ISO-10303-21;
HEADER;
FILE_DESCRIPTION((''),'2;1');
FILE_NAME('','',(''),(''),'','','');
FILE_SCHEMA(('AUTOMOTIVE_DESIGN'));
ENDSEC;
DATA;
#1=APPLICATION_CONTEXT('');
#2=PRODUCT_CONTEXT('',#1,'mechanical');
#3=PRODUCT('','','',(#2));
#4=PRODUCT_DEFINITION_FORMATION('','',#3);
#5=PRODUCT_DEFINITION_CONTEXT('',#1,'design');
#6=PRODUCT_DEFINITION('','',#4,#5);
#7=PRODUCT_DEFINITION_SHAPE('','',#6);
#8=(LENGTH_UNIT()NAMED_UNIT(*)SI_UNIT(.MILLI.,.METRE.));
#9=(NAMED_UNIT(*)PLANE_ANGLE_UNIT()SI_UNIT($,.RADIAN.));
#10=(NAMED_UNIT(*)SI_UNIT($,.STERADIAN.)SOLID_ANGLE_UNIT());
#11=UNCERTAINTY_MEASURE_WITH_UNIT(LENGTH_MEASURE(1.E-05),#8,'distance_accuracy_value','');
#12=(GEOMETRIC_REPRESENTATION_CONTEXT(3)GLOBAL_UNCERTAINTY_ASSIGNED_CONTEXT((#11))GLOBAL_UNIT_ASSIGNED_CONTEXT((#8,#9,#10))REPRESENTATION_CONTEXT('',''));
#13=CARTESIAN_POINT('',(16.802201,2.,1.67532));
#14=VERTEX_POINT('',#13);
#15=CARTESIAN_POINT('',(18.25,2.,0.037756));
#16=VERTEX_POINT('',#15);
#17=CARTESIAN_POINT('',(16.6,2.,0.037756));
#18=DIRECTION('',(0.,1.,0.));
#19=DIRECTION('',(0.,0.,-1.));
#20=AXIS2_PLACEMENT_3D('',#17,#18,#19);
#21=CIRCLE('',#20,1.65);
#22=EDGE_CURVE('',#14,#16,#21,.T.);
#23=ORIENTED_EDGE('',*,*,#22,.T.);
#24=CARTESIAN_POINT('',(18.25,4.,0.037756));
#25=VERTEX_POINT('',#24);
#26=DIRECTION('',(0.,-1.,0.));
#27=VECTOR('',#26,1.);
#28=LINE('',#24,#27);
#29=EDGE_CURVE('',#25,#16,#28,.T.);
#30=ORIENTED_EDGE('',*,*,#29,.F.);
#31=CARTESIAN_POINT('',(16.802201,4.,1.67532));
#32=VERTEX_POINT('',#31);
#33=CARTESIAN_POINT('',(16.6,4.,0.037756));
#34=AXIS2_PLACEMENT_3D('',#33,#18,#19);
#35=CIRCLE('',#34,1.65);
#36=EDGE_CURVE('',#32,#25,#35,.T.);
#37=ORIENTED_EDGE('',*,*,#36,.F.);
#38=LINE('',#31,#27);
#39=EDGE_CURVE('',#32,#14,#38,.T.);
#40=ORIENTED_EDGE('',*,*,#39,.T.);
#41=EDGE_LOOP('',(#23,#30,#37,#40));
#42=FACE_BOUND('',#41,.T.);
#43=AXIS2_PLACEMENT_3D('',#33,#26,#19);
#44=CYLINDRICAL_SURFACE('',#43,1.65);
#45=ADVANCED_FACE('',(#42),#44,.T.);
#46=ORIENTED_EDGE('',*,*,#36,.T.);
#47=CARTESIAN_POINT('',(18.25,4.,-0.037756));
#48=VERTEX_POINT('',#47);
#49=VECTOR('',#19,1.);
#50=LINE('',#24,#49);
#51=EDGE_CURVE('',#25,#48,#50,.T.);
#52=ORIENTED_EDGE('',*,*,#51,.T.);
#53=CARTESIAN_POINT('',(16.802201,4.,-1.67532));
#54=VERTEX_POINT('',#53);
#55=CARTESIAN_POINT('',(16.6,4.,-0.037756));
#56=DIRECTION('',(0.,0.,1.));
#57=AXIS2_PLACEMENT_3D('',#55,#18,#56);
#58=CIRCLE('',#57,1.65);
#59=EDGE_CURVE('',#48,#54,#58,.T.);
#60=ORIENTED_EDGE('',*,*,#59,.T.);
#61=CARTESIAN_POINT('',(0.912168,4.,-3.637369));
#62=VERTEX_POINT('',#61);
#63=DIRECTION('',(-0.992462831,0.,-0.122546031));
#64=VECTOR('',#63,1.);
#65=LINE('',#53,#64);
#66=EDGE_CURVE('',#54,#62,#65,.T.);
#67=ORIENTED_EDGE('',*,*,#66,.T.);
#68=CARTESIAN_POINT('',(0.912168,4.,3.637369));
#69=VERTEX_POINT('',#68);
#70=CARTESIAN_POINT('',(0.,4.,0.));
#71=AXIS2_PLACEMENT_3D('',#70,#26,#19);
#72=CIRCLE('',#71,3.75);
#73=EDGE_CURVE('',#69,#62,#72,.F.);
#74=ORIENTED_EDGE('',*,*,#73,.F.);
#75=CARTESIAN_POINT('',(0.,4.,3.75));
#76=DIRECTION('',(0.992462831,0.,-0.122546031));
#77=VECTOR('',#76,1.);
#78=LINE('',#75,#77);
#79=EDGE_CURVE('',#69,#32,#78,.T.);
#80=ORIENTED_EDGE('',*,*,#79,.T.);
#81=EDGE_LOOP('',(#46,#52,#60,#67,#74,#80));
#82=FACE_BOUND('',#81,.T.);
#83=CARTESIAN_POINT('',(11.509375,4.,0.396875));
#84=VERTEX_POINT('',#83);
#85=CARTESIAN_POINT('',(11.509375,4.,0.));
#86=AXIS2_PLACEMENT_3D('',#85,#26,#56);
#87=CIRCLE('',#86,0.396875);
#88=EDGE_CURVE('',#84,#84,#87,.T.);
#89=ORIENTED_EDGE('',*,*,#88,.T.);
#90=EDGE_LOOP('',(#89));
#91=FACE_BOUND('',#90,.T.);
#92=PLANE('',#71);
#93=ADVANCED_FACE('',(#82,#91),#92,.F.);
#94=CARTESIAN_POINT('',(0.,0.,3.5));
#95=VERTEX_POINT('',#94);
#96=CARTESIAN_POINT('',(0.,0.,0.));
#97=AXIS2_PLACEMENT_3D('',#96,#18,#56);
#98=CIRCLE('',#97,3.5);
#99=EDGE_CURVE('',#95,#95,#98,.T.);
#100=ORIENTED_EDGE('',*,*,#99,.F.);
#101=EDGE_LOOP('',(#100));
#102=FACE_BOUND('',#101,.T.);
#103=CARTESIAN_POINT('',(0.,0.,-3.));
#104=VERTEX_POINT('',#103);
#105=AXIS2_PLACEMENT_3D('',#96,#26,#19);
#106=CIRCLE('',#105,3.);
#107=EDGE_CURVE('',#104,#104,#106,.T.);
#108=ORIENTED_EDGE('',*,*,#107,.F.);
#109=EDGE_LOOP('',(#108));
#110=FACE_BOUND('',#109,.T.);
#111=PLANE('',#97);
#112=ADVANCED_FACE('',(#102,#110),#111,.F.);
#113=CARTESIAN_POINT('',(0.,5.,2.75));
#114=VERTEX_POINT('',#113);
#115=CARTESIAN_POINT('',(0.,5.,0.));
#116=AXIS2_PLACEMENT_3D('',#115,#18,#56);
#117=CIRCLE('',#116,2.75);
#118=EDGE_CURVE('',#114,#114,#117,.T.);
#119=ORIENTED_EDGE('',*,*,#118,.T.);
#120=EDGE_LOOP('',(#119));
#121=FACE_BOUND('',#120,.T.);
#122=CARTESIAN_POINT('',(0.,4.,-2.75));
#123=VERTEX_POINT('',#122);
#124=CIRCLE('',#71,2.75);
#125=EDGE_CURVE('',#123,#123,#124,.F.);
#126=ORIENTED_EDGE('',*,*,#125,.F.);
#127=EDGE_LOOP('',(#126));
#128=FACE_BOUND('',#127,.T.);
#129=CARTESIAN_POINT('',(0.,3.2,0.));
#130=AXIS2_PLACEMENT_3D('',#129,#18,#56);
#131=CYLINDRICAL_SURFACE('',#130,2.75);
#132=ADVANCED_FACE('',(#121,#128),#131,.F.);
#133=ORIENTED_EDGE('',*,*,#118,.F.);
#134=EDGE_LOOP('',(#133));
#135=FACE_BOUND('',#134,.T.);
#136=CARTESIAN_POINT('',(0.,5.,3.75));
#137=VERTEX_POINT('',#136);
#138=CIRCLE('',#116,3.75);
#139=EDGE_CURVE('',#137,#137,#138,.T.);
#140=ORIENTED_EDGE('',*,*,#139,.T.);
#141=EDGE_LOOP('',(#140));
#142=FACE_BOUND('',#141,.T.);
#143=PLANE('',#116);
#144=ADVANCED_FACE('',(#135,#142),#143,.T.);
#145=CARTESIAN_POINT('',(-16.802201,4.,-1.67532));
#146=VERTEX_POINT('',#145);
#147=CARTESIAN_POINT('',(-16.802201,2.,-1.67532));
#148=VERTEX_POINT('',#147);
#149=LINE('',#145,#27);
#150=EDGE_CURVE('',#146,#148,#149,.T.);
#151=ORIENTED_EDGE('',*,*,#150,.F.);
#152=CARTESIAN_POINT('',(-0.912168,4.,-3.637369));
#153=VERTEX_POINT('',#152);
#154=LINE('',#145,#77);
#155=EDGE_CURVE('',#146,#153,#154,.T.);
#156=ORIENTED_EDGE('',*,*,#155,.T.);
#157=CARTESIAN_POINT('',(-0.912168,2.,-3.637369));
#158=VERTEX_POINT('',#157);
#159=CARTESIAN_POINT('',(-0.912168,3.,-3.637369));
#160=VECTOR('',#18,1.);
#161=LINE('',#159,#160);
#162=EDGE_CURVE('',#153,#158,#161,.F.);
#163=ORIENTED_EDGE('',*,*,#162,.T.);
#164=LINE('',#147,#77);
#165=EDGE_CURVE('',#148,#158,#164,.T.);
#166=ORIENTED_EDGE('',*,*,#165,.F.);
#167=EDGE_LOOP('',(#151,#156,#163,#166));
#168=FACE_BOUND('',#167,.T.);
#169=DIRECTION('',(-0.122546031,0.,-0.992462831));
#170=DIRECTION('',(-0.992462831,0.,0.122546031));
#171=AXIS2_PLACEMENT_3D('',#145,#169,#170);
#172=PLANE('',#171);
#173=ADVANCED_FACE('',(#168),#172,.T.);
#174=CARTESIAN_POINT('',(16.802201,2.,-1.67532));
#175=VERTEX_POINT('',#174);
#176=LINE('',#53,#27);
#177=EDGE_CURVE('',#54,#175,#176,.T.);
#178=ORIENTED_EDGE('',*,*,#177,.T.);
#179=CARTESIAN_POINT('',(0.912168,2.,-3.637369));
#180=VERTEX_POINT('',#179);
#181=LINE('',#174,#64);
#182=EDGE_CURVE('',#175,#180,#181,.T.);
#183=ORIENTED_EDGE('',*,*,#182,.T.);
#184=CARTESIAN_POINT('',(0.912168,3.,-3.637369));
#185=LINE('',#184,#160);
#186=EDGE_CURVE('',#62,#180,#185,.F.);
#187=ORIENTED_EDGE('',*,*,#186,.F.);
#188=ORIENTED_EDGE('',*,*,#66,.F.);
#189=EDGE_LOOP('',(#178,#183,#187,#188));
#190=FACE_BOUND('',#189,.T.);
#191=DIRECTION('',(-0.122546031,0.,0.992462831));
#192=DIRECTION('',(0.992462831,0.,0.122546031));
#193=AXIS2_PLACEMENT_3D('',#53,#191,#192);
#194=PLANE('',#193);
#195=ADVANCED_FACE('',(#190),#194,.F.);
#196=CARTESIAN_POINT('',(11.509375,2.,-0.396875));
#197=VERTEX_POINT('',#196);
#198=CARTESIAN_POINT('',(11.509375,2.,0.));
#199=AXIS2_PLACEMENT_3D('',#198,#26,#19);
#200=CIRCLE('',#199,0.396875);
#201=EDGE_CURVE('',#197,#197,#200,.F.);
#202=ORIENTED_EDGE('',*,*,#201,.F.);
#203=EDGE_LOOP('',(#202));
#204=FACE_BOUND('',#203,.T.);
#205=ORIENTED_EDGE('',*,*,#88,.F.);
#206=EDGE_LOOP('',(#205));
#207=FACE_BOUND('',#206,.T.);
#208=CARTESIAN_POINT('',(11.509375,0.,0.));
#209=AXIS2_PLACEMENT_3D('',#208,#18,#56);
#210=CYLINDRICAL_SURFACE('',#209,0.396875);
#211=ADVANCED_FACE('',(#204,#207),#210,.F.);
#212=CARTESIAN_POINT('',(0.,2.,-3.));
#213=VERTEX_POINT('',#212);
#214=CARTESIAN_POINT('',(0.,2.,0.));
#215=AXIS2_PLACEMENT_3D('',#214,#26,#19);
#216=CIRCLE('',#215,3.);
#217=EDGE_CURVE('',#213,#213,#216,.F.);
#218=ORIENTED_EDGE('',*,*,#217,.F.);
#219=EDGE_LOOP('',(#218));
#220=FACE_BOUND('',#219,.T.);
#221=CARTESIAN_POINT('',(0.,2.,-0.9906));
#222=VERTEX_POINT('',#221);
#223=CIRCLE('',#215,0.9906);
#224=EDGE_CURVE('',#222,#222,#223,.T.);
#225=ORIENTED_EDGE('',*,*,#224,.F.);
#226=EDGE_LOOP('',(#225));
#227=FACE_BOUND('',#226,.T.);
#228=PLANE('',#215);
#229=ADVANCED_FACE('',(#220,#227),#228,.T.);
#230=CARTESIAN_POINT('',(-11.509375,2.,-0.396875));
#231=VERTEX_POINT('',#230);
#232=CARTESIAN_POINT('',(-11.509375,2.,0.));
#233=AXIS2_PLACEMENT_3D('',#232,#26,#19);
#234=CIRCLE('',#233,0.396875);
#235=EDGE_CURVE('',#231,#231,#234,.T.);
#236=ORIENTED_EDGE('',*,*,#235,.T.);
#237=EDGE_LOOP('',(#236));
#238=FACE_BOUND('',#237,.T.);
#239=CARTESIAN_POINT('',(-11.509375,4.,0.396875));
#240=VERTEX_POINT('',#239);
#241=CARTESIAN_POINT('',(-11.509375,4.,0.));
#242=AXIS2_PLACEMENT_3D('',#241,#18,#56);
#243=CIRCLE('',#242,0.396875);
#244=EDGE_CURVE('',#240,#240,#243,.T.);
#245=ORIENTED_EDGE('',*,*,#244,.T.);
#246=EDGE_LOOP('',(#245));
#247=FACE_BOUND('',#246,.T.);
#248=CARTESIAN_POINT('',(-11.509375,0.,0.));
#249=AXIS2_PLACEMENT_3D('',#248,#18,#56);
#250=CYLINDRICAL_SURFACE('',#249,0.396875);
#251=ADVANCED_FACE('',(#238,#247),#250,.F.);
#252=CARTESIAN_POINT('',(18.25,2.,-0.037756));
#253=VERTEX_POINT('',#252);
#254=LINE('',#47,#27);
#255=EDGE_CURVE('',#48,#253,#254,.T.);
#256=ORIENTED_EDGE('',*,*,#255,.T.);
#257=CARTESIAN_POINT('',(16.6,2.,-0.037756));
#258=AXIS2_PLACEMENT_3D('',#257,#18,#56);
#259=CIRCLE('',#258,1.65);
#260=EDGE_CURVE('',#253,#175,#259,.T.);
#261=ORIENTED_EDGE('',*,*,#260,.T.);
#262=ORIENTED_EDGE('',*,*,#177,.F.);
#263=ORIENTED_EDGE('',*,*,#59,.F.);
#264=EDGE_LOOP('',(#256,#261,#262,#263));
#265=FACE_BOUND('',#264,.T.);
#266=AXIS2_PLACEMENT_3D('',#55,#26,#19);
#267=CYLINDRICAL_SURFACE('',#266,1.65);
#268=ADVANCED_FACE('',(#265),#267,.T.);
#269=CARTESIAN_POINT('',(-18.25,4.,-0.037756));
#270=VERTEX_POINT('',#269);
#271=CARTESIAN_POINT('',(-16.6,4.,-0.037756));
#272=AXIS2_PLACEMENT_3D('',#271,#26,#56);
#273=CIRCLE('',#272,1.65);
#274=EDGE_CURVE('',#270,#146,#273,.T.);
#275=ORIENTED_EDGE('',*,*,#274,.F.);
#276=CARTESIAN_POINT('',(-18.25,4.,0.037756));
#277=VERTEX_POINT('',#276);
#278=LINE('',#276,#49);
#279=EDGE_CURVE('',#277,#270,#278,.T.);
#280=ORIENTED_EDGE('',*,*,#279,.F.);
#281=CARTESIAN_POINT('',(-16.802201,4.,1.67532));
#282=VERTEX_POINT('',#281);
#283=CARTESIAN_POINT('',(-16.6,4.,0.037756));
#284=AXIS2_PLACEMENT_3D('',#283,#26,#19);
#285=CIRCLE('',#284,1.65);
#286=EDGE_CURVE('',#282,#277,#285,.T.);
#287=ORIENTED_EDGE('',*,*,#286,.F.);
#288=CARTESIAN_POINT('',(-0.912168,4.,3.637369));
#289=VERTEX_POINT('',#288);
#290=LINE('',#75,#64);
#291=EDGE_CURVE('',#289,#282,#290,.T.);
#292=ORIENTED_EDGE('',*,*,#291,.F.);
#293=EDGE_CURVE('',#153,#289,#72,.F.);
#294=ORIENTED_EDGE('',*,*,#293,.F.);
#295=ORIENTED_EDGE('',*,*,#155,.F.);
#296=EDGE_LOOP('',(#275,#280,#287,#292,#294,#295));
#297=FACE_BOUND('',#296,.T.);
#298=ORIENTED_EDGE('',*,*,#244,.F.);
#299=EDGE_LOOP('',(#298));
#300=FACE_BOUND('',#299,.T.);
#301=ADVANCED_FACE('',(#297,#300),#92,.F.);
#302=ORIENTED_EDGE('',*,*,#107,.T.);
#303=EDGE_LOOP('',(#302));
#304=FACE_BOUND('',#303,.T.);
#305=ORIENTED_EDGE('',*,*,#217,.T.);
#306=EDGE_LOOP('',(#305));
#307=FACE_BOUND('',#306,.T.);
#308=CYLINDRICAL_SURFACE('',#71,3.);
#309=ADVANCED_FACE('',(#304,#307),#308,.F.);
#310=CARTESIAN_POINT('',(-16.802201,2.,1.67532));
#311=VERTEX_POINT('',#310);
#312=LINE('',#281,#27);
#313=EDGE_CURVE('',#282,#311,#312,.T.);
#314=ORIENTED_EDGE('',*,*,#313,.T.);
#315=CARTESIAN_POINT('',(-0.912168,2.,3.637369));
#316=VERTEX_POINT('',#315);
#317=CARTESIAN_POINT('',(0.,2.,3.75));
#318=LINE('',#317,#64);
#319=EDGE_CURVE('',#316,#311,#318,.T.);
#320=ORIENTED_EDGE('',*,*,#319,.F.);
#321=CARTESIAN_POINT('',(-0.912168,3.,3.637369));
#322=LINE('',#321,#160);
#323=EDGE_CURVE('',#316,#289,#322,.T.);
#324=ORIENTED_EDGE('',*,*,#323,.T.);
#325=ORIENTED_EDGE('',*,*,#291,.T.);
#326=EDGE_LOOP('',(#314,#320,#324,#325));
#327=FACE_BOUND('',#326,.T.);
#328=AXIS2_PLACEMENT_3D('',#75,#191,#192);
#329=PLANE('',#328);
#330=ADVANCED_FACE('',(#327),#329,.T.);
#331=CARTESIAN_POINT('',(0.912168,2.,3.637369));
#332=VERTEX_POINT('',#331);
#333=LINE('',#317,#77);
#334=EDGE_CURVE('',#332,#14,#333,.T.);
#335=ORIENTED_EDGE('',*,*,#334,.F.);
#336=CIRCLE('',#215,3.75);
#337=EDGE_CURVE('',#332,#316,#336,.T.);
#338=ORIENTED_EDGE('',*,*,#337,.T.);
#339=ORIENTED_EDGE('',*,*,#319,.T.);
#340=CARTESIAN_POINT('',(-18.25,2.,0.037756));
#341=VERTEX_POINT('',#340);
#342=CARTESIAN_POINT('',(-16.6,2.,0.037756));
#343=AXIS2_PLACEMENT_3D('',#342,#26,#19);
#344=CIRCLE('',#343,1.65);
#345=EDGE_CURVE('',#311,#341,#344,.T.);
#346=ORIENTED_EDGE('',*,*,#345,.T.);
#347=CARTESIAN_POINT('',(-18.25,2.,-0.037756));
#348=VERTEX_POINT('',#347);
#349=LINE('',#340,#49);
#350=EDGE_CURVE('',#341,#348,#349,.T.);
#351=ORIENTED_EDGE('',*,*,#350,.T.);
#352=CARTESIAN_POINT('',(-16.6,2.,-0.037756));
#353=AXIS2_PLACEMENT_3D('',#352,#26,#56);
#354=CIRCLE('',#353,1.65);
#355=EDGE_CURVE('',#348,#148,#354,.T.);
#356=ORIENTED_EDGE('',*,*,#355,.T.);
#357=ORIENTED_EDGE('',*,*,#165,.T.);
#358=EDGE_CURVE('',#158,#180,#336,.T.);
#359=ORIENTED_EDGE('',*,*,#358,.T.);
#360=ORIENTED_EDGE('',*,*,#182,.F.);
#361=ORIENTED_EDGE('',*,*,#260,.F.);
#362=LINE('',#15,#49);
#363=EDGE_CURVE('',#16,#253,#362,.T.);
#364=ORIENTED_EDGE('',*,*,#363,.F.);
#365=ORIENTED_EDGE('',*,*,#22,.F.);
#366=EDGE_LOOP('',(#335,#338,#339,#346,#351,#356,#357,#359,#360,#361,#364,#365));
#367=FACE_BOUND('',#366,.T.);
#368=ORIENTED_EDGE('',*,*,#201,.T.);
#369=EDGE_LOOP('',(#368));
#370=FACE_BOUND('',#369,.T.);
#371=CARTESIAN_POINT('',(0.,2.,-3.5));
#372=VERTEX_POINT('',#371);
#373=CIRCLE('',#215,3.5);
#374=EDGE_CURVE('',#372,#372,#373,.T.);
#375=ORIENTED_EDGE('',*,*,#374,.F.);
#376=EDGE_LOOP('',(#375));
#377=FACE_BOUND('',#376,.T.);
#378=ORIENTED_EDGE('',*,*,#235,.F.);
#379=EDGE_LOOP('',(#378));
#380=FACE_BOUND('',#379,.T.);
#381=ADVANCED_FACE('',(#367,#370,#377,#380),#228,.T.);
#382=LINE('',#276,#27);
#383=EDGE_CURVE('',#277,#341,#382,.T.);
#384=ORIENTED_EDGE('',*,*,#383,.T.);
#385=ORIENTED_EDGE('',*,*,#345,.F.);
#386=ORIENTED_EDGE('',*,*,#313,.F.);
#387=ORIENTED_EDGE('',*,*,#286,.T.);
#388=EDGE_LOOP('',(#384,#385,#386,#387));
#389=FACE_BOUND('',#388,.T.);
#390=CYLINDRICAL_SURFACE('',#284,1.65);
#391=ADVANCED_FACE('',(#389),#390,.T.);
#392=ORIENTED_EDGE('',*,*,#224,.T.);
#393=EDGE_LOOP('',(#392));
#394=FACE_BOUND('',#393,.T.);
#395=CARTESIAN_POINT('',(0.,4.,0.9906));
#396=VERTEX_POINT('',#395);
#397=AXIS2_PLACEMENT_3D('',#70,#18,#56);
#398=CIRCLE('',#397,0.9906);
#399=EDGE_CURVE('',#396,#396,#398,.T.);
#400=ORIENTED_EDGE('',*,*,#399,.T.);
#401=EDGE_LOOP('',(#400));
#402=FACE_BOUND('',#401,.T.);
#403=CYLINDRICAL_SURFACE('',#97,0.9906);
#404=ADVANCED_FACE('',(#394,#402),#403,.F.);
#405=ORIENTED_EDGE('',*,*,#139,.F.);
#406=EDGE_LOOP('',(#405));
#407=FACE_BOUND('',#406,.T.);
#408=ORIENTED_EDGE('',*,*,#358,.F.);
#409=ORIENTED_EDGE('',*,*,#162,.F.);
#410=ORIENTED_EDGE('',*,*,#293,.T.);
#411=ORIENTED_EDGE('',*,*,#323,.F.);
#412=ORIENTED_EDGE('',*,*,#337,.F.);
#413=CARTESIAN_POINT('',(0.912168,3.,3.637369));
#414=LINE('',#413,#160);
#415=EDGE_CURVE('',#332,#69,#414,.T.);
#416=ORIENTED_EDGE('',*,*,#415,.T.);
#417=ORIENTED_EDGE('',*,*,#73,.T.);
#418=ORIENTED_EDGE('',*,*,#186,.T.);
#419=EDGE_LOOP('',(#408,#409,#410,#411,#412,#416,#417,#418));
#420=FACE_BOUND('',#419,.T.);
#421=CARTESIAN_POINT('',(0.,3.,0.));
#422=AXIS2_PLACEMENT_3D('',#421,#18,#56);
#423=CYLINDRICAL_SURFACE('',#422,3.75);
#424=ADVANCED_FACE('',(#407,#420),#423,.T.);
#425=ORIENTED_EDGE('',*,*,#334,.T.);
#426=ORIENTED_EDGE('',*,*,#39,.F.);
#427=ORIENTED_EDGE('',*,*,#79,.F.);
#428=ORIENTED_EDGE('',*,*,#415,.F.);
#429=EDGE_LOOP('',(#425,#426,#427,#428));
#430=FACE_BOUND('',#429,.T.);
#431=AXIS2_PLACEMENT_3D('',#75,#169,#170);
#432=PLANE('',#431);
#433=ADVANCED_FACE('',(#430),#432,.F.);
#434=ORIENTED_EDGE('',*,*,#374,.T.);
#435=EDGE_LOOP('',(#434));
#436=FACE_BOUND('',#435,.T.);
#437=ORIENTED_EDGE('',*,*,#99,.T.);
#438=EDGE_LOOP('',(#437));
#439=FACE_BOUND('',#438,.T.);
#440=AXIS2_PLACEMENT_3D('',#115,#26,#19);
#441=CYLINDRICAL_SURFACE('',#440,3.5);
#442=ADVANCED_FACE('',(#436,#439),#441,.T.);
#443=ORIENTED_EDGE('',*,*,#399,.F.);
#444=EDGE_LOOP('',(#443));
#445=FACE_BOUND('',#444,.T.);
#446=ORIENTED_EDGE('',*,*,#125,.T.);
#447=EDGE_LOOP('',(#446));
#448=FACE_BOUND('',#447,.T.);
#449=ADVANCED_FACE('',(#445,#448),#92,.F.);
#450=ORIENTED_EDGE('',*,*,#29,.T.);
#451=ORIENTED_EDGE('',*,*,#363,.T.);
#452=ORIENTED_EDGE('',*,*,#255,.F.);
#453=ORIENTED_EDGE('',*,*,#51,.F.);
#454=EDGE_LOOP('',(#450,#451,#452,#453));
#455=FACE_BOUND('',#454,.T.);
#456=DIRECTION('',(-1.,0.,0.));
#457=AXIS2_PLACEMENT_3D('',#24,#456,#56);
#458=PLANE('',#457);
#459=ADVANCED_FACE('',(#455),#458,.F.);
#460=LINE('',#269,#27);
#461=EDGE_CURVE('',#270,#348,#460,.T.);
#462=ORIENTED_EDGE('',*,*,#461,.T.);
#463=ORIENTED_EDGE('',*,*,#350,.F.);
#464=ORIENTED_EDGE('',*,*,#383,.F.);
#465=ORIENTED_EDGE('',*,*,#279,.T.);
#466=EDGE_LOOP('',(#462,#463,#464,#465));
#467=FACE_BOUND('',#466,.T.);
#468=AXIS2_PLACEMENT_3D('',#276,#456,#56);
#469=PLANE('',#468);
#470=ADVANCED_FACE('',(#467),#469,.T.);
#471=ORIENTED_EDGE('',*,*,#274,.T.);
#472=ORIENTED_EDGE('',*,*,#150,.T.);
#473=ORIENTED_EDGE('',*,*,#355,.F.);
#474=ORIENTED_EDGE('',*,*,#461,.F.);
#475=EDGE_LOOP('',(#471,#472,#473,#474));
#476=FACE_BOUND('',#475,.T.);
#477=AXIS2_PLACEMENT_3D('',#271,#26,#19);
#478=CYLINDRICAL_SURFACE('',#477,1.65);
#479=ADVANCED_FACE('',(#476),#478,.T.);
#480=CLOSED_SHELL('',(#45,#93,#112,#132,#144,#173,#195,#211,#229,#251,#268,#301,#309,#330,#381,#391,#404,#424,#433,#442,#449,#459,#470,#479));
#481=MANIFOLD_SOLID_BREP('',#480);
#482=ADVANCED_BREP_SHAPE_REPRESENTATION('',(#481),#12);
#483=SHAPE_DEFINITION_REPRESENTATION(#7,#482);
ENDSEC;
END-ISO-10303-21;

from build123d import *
from build123d.topology import SkipClean

# Parameters (mm, degrees)
SKETCH1_R           = 3.5
BOSS_EXTRUDE1_DEPTH = 5
SKETCH2_R           = 3
CUT_EXTRUDE1_DEPTH  = 4
SKETCH4_R           = 3.75
BOSS_EXTRUDE2_DEPTH = 2
SKETCH5_R           = 2.75
CUT_EXTRUDE2_DEPTH  = 1.8
SKETCH6_R           = 1.190625
CUT_EXTRUDE3_DEPTH  = 1.8
BOSS_EXTRUDE3_START = -1
BOSS_EXTRUDE3_DEPTH = 2
SKETCH9_R           = 0.9906
CUT_EXTRUDE4_DEPTH  = 20.055839
SKETCH10_R          = 0.396875
CUT_EXTRUDE5_DEPTH  = 20.055839


with BuildPart() as part:
    # Sketch1 → Boss-Extrude1 (new body)
    with BuildSketch(Plane(origin=(0, 0, 0), x_dir=(1, 0, 0), z_dir=(0, 1, 0))):
        Circle(SKETCH1_R)
    extrude(amount=BOSS_EXTRUDE1_DEPTH)

    # Sketch2 → Cut-Extrude1 (cut)
    with BuildSketch(Plane.XZ):
        Circle(SKETCH2_R)
    extrude(amount=-CUT_EXTRUDE1_DEPTH, mode=Mode.SUBTRACT)

    # Sketch4 → Boss-Extrude2 (add)
    with BuildSketch(Plane(origin=(0, 5, 0), x_dir=(1, 0, 0), z_dir=(0, 1, 0))):
        Circle(SKETCH4_R)
    extrude(amount=-BOSS_EXTRUDE2_DEPTH)

    # Sketch5 → Cut-Extrude2 (cut)
    with BuildSketch(Plane(origin=(0, 5, 0), x_dir=(1, 0, 0), z_dir=(0, 1, 0))):
        Circle(SKETCH5_R)
    extrude(amount=-CUT_EXTRUDE2_DEPTH, mode=Mode.SUBTRACT)

    # Sketch6 → Cut-Extrude3 (cut)
    with BuildSketch(Plane(origin=(0, 3.2, 0), x_dir=(1, 0, 0), z_dir=(0, 1, 0))):
        Circle(SKETCH6_R)
    extrude(amount=-CUT_EXTRUDE3_DEPTH, mode=Mode.SUBTRACT)

    # Sketch8 → Boss-Extrude3 (add)
    with SkipClean():  # the faces are left unmerged after this step: merging them gives an invalid solid
        with BuildSketch(Plane.XZ.offset(-3).offset(BOSS_EXTRUDE3_START)):
            with BuildLine():
                Line((0, 3.75), (-16.802200952, 1.675319737))
                ThreePointArc((-16.802200952, 1.675319737), (-17.83614958, 1.130657807), (-18.25, 0.037756066))
                Line((-18.25, 0.037756066), (-18.25, -0.037756066))
                ThreePointArc((-18.25, -0.037756066), (-17.83614958, -1.130657807), (-16.802200952, -1.675319737))
                Line((-16.802200952, -1.675319737), (0, -3.75))
                ThreePointArc((0, -3.75), (3.75, 0), (0, 3.75))
            make_face()
        boss_extrude3 = extrude(amount=BOSS_EXTRUDE3_DEPTH)
    add(part.part.scale(1), mode=Mode.REPLACE)  # the faces are merged on a copy

    # Mirror1: Boss-Extrude3 across plane
    add(boss_extrude3.mirror(Plane(origin=(0, 0, 0), x_dir=(0, 0, 1), z_dir=(1, 0, 0))))

    # Sketch9 → Cut-Extrude4 (cut, through all)
    with BuildSketch(Plane(origin=(0, 4, 0), x_dir=(1, 0, 0), z_dir=(0, 1, 0))):
        Circle(SKETCH9_R)
    extrude(amount=-CUT_EXTRUDE4_DEPTH, mode=Mode.SUBTRACT)

    # Sketch10 → Cut-Extrude5 (cut, through all)
    with BuildSketch(Plane(origin=(0, 4, 0), x_dir=(1, 0, 0), z_dir=(0, 1, 0))):
        with Locations((-11.509375, 0)):
            Circle(SKETCH10_R)
    cut_extrude5 = extrude(amount=-CUT_EXTRUDE5_DEPTH, mode=Mode.SUBTRACT)

    # Mirror2: Cut-Extrude5 across plane
    add(cut_extrude5.mirror(Plane(origin=(0, 0, 0), x_dir=(0, 0, 1), z_dir=(1, 0, 0))), mode=Mode.SUBTRACT)


solid = part.part
